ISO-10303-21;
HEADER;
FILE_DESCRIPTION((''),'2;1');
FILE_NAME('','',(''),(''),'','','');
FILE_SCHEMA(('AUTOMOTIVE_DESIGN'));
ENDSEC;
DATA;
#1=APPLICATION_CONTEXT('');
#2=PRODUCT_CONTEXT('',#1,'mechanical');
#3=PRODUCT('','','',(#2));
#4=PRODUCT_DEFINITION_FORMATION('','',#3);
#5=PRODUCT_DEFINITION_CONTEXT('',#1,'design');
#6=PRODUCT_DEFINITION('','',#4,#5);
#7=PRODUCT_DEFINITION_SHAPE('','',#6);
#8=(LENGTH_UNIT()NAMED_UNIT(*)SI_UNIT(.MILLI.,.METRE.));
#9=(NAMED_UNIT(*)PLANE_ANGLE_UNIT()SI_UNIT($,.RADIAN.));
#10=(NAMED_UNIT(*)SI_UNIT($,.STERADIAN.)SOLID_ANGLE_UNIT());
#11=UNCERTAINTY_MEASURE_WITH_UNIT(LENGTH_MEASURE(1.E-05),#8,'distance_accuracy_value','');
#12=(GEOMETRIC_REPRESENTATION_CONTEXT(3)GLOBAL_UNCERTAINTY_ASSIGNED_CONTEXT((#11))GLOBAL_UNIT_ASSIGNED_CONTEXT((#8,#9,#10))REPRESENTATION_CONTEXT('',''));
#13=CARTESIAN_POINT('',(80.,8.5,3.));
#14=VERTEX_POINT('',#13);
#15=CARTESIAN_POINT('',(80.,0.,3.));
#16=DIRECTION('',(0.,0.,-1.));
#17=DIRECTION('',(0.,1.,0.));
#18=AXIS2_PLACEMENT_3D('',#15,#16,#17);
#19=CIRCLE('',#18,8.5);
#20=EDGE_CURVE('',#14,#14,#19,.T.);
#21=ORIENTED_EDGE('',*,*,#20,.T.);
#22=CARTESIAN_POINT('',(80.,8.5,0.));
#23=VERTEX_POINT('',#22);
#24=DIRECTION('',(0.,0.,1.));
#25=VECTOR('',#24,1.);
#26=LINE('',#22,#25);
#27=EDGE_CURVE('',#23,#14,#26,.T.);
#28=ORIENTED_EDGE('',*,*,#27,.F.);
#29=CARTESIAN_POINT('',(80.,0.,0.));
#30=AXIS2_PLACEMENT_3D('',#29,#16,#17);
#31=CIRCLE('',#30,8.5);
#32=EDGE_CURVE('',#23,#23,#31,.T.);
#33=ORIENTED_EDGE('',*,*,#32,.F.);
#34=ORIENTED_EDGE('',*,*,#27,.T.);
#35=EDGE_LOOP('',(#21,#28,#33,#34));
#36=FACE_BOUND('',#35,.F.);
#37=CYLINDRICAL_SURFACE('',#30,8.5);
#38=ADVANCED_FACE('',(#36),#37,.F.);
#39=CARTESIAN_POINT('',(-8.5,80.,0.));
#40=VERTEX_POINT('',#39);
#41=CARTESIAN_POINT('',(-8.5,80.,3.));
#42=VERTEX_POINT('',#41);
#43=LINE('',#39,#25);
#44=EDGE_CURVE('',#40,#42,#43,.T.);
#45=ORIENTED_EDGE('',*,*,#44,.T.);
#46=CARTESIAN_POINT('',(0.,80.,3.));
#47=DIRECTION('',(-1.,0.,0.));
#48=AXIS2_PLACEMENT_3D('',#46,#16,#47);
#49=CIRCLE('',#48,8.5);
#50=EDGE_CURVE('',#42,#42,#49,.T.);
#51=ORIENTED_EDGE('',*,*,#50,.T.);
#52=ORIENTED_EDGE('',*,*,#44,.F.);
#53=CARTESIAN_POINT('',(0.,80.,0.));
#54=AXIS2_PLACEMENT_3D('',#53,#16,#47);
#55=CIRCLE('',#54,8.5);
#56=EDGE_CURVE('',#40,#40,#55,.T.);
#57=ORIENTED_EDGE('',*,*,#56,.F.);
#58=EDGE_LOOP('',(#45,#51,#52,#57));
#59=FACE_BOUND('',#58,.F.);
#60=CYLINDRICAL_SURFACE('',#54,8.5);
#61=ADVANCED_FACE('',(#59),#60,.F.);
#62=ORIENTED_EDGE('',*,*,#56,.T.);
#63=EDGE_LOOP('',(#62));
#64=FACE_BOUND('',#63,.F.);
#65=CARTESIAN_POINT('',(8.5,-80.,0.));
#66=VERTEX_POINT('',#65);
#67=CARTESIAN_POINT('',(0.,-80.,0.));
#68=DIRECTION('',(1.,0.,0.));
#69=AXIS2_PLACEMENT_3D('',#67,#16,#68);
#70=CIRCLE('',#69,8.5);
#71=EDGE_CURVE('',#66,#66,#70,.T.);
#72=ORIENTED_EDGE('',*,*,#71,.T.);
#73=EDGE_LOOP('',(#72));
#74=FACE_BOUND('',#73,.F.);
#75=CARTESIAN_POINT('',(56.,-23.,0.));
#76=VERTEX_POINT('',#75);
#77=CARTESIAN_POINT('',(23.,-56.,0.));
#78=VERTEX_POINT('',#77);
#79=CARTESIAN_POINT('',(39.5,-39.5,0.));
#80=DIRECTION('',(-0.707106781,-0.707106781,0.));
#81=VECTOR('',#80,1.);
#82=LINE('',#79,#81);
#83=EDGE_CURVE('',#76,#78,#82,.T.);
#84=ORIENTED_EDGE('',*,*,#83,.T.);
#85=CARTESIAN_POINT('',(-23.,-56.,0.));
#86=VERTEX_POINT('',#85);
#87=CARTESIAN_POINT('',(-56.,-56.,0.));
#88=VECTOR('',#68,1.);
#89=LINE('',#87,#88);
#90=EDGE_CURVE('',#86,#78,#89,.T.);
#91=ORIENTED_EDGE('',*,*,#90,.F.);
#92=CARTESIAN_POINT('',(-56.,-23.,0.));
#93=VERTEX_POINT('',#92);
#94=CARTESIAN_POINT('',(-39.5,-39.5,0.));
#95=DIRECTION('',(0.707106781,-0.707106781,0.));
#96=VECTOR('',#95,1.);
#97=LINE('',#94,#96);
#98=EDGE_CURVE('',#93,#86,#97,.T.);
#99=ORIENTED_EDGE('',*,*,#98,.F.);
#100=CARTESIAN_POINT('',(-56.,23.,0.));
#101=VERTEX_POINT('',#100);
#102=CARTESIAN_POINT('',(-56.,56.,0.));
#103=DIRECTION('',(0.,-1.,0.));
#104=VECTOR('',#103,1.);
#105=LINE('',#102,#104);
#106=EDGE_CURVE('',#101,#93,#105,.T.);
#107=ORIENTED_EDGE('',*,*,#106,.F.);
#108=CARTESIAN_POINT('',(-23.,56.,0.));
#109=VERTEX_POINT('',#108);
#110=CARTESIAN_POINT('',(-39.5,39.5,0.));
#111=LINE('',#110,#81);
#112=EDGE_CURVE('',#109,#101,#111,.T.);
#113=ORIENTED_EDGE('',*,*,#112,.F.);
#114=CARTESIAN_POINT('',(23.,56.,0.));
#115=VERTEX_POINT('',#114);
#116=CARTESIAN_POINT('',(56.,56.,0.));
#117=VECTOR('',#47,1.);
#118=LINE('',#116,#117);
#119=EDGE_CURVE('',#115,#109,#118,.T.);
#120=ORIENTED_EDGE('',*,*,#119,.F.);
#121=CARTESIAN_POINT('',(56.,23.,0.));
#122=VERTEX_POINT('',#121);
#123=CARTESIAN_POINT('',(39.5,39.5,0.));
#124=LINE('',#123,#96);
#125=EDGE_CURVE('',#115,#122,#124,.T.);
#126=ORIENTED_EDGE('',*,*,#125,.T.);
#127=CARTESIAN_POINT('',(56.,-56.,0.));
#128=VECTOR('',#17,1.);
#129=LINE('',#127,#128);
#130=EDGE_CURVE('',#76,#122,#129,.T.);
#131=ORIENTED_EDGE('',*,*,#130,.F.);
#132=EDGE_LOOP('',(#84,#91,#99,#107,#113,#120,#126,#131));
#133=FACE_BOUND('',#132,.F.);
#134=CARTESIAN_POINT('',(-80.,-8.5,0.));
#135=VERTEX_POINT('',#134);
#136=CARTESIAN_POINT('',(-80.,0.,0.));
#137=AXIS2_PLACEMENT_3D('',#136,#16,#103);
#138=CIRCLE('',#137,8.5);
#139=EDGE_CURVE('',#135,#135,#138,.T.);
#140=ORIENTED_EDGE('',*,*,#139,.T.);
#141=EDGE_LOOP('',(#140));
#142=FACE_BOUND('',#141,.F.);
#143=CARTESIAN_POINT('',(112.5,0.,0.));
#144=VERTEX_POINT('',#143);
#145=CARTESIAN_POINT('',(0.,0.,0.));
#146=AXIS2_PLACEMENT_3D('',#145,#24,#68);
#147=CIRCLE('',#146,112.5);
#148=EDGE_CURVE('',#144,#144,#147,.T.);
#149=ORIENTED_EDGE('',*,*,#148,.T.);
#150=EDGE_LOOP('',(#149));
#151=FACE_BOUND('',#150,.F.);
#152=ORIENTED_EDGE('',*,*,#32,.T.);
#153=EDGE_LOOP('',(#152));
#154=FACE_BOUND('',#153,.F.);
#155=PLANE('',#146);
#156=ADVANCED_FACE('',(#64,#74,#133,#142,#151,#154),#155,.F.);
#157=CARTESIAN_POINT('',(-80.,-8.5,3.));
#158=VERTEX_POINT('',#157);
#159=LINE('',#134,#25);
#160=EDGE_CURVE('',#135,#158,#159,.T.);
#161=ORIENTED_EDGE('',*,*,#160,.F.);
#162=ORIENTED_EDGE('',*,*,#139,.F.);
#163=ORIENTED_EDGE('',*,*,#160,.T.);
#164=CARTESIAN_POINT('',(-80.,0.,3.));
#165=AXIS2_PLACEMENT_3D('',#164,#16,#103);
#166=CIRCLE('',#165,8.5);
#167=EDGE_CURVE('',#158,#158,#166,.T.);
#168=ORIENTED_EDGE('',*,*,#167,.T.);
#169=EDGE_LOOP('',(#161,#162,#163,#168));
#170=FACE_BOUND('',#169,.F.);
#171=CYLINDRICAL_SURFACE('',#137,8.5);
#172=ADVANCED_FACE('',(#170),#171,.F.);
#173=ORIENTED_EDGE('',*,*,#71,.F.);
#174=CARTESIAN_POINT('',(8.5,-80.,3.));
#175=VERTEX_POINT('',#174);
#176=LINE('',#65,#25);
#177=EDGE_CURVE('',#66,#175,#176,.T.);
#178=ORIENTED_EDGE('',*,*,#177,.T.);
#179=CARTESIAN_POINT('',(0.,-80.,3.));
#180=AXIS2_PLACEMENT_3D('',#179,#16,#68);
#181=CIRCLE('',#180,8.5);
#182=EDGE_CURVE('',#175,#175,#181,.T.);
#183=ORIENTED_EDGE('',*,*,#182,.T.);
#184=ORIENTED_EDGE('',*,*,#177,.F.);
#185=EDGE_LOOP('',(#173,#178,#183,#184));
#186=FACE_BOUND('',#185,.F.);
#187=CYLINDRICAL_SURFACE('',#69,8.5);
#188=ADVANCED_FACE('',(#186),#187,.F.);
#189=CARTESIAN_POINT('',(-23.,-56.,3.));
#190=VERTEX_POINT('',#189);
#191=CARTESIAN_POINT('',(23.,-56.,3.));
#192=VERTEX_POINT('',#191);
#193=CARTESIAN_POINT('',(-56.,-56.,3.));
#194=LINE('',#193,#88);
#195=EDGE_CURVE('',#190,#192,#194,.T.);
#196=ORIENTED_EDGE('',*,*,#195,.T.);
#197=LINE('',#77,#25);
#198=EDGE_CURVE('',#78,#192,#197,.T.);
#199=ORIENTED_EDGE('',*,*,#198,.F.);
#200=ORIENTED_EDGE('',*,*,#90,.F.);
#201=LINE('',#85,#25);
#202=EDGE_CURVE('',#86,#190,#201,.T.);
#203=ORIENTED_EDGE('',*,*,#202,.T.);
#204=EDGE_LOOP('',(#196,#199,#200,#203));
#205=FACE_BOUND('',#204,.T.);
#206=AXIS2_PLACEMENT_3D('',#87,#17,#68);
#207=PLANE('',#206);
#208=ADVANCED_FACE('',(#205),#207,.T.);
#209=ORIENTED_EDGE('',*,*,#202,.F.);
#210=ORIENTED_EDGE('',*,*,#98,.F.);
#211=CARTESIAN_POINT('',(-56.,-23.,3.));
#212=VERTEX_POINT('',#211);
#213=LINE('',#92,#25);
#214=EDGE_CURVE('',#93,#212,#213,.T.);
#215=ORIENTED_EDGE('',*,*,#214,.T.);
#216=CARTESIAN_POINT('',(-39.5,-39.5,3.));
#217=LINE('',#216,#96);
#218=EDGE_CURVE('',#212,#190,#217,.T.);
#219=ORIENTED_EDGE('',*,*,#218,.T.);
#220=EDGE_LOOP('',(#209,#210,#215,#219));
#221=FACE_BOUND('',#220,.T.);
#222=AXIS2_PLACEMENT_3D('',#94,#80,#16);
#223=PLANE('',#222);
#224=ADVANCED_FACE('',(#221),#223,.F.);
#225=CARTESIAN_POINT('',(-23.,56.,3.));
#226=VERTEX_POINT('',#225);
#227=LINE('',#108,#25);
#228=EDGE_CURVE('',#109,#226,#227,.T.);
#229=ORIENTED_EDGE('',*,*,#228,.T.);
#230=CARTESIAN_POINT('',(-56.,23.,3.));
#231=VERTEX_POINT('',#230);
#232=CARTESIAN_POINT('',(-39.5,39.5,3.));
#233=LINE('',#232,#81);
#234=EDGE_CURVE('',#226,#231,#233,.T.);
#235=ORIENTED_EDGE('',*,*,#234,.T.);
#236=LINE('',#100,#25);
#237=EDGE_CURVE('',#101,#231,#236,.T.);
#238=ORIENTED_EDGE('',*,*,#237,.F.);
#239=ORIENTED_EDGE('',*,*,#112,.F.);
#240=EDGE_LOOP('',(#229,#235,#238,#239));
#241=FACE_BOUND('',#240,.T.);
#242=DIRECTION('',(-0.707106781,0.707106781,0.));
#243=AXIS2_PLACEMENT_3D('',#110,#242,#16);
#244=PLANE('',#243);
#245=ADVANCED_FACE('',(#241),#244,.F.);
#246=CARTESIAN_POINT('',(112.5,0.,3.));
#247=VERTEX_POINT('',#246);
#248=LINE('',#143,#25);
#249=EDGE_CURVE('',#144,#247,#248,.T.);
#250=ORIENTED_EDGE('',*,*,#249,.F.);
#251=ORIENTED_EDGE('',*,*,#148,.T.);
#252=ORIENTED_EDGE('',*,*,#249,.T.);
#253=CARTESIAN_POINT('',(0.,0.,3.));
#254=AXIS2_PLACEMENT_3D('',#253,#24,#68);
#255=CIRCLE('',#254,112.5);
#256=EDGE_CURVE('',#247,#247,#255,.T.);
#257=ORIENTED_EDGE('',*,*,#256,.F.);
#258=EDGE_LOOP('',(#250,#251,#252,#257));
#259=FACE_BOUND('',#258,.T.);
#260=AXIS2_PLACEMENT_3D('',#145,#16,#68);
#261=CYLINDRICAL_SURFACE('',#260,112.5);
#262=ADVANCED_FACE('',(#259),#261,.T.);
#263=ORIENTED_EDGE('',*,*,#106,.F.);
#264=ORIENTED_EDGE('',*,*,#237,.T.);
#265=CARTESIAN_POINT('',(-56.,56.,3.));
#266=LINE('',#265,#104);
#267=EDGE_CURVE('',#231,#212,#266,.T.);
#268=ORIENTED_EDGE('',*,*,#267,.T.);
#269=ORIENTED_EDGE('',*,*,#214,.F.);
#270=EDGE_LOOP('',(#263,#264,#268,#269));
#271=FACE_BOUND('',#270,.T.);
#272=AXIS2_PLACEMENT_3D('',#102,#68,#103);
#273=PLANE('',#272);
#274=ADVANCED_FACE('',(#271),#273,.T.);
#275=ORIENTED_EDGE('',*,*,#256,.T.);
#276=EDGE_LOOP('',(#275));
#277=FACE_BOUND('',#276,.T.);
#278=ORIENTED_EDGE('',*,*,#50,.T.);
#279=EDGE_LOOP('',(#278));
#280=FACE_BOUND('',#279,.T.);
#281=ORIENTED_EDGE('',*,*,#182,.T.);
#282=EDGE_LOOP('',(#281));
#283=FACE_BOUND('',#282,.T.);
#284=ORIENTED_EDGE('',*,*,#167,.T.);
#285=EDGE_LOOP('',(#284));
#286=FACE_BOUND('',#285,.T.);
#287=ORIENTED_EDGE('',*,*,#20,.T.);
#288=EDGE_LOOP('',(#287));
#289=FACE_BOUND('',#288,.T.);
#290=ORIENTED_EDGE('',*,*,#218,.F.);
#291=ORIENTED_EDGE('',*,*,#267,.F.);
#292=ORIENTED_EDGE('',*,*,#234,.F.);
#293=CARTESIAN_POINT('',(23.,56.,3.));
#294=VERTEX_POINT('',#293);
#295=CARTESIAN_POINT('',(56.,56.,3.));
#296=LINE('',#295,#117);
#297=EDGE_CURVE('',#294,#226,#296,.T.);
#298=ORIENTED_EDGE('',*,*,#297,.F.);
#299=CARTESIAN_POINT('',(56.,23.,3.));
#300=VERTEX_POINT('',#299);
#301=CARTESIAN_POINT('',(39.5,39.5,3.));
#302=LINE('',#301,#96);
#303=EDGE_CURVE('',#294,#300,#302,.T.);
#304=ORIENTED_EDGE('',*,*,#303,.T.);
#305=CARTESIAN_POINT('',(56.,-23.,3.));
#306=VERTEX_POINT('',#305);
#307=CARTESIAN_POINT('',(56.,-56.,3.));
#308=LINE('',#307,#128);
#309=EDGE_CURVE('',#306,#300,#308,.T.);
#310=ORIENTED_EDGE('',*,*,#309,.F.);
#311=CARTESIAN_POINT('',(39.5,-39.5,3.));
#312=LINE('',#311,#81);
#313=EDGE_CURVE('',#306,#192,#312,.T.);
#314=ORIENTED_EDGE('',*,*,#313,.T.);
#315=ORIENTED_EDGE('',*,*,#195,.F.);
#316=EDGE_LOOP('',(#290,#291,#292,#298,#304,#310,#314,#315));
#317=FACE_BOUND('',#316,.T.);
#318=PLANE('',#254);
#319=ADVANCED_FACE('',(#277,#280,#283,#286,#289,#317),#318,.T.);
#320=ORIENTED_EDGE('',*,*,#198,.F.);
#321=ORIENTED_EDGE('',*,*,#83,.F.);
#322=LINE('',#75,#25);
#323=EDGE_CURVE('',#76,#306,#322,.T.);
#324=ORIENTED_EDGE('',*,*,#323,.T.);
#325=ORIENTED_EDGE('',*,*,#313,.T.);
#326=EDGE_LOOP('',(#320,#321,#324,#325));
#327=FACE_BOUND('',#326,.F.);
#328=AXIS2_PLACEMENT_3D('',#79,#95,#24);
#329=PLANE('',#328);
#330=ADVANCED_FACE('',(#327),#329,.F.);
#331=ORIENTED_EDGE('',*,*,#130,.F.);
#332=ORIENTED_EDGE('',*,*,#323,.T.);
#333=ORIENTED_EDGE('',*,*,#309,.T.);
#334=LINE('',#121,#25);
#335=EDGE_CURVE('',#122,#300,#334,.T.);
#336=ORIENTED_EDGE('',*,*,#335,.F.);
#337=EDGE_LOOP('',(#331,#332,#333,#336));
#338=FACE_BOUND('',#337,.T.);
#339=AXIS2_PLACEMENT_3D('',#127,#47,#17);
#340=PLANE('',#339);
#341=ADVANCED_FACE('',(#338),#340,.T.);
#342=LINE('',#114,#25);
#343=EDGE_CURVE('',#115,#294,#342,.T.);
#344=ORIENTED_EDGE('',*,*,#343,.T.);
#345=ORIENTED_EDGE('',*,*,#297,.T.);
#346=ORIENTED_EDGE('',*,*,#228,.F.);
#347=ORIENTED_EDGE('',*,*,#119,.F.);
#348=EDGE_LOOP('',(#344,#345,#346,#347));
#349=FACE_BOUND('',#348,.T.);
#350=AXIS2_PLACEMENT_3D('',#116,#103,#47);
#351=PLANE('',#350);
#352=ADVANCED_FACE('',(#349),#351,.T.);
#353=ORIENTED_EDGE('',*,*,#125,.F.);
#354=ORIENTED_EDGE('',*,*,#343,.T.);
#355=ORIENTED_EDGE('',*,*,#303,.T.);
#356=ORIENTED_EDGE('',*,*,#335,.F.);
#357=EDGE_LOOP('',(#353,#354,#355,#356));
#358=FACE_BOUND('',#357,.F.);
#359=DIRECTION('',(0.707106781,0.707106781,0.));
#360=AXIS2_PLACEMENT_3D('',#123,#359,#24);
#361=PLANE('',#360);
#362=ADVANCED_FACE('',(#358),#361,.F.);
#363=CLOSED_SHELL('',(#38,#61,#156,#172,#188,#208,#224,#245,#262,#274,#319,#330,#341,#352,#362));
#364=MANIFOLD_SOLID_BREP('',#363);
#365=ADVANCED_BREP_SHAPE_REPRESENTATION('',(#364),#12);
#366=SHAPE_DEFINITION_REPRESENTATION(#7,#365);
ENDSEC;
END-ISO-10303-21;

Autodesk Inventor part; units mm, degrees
ref_plane "YZ Plane" through (0, 0, 0) normal (1, 0, 0) x (0, 1, 0)
ref_plane "XZ Plane" through (0, 0, 0) normal (0, 1, 0) x (-1, 0, 0)
ref_plane "XY Plane" through (0, 0, 0) normal (0, 0, 1) x (1, 0, 0)
sketch "Sketch1" plane through (0, 0, 0) normal (0, 0, 1) x (1, 0, 0)
  circle A0 centre (0, 0) radius 112.5
  line L0 (56, 56) -> (-56, 56)
  line L1 (-56, 56) -> (-56, -56)
  line L2 (-56, -56) -> (56, -56)
  line L3 (56, -56) -> (56, 56)
  line L4 (56, 56) -> (-56, -56) construction
  line L5 (-56, 56) -> (56, -56) construction
  dimension "d157" = 225
  dimension "d158" = 112
  dimension "d159" = 112
extrude "Plate5" add sketch "Sketch1" along normal blind 3
sketch "Sketch7" plane through (0, 0, 0) normal (0, 0, -1) x (-1, 0, 0)
  circle A0 centre (0, 80) radius 8.5
  point P0 (0, 0)
  dimension "d160" = 17
  dimension "d161" = 80
extrude "Cut1" cut sketch "Sketch7" against normal blind 3
pattern_circular "Circular Pattern1" count 4 over 360 about axis through (0, 0, -10) along (0, 0, 1) of "Cut1"
chamfer "Corner Chamfer2" distance 33 angle 45 4 edges at (-56, -56, 1.5) (56, -56, 1.5) (-56, 56, 1.5) (56, 56, 1.5)
properties part number "TZS 0972 funnel FLANGE 50-90" material "Stainless Steel"
